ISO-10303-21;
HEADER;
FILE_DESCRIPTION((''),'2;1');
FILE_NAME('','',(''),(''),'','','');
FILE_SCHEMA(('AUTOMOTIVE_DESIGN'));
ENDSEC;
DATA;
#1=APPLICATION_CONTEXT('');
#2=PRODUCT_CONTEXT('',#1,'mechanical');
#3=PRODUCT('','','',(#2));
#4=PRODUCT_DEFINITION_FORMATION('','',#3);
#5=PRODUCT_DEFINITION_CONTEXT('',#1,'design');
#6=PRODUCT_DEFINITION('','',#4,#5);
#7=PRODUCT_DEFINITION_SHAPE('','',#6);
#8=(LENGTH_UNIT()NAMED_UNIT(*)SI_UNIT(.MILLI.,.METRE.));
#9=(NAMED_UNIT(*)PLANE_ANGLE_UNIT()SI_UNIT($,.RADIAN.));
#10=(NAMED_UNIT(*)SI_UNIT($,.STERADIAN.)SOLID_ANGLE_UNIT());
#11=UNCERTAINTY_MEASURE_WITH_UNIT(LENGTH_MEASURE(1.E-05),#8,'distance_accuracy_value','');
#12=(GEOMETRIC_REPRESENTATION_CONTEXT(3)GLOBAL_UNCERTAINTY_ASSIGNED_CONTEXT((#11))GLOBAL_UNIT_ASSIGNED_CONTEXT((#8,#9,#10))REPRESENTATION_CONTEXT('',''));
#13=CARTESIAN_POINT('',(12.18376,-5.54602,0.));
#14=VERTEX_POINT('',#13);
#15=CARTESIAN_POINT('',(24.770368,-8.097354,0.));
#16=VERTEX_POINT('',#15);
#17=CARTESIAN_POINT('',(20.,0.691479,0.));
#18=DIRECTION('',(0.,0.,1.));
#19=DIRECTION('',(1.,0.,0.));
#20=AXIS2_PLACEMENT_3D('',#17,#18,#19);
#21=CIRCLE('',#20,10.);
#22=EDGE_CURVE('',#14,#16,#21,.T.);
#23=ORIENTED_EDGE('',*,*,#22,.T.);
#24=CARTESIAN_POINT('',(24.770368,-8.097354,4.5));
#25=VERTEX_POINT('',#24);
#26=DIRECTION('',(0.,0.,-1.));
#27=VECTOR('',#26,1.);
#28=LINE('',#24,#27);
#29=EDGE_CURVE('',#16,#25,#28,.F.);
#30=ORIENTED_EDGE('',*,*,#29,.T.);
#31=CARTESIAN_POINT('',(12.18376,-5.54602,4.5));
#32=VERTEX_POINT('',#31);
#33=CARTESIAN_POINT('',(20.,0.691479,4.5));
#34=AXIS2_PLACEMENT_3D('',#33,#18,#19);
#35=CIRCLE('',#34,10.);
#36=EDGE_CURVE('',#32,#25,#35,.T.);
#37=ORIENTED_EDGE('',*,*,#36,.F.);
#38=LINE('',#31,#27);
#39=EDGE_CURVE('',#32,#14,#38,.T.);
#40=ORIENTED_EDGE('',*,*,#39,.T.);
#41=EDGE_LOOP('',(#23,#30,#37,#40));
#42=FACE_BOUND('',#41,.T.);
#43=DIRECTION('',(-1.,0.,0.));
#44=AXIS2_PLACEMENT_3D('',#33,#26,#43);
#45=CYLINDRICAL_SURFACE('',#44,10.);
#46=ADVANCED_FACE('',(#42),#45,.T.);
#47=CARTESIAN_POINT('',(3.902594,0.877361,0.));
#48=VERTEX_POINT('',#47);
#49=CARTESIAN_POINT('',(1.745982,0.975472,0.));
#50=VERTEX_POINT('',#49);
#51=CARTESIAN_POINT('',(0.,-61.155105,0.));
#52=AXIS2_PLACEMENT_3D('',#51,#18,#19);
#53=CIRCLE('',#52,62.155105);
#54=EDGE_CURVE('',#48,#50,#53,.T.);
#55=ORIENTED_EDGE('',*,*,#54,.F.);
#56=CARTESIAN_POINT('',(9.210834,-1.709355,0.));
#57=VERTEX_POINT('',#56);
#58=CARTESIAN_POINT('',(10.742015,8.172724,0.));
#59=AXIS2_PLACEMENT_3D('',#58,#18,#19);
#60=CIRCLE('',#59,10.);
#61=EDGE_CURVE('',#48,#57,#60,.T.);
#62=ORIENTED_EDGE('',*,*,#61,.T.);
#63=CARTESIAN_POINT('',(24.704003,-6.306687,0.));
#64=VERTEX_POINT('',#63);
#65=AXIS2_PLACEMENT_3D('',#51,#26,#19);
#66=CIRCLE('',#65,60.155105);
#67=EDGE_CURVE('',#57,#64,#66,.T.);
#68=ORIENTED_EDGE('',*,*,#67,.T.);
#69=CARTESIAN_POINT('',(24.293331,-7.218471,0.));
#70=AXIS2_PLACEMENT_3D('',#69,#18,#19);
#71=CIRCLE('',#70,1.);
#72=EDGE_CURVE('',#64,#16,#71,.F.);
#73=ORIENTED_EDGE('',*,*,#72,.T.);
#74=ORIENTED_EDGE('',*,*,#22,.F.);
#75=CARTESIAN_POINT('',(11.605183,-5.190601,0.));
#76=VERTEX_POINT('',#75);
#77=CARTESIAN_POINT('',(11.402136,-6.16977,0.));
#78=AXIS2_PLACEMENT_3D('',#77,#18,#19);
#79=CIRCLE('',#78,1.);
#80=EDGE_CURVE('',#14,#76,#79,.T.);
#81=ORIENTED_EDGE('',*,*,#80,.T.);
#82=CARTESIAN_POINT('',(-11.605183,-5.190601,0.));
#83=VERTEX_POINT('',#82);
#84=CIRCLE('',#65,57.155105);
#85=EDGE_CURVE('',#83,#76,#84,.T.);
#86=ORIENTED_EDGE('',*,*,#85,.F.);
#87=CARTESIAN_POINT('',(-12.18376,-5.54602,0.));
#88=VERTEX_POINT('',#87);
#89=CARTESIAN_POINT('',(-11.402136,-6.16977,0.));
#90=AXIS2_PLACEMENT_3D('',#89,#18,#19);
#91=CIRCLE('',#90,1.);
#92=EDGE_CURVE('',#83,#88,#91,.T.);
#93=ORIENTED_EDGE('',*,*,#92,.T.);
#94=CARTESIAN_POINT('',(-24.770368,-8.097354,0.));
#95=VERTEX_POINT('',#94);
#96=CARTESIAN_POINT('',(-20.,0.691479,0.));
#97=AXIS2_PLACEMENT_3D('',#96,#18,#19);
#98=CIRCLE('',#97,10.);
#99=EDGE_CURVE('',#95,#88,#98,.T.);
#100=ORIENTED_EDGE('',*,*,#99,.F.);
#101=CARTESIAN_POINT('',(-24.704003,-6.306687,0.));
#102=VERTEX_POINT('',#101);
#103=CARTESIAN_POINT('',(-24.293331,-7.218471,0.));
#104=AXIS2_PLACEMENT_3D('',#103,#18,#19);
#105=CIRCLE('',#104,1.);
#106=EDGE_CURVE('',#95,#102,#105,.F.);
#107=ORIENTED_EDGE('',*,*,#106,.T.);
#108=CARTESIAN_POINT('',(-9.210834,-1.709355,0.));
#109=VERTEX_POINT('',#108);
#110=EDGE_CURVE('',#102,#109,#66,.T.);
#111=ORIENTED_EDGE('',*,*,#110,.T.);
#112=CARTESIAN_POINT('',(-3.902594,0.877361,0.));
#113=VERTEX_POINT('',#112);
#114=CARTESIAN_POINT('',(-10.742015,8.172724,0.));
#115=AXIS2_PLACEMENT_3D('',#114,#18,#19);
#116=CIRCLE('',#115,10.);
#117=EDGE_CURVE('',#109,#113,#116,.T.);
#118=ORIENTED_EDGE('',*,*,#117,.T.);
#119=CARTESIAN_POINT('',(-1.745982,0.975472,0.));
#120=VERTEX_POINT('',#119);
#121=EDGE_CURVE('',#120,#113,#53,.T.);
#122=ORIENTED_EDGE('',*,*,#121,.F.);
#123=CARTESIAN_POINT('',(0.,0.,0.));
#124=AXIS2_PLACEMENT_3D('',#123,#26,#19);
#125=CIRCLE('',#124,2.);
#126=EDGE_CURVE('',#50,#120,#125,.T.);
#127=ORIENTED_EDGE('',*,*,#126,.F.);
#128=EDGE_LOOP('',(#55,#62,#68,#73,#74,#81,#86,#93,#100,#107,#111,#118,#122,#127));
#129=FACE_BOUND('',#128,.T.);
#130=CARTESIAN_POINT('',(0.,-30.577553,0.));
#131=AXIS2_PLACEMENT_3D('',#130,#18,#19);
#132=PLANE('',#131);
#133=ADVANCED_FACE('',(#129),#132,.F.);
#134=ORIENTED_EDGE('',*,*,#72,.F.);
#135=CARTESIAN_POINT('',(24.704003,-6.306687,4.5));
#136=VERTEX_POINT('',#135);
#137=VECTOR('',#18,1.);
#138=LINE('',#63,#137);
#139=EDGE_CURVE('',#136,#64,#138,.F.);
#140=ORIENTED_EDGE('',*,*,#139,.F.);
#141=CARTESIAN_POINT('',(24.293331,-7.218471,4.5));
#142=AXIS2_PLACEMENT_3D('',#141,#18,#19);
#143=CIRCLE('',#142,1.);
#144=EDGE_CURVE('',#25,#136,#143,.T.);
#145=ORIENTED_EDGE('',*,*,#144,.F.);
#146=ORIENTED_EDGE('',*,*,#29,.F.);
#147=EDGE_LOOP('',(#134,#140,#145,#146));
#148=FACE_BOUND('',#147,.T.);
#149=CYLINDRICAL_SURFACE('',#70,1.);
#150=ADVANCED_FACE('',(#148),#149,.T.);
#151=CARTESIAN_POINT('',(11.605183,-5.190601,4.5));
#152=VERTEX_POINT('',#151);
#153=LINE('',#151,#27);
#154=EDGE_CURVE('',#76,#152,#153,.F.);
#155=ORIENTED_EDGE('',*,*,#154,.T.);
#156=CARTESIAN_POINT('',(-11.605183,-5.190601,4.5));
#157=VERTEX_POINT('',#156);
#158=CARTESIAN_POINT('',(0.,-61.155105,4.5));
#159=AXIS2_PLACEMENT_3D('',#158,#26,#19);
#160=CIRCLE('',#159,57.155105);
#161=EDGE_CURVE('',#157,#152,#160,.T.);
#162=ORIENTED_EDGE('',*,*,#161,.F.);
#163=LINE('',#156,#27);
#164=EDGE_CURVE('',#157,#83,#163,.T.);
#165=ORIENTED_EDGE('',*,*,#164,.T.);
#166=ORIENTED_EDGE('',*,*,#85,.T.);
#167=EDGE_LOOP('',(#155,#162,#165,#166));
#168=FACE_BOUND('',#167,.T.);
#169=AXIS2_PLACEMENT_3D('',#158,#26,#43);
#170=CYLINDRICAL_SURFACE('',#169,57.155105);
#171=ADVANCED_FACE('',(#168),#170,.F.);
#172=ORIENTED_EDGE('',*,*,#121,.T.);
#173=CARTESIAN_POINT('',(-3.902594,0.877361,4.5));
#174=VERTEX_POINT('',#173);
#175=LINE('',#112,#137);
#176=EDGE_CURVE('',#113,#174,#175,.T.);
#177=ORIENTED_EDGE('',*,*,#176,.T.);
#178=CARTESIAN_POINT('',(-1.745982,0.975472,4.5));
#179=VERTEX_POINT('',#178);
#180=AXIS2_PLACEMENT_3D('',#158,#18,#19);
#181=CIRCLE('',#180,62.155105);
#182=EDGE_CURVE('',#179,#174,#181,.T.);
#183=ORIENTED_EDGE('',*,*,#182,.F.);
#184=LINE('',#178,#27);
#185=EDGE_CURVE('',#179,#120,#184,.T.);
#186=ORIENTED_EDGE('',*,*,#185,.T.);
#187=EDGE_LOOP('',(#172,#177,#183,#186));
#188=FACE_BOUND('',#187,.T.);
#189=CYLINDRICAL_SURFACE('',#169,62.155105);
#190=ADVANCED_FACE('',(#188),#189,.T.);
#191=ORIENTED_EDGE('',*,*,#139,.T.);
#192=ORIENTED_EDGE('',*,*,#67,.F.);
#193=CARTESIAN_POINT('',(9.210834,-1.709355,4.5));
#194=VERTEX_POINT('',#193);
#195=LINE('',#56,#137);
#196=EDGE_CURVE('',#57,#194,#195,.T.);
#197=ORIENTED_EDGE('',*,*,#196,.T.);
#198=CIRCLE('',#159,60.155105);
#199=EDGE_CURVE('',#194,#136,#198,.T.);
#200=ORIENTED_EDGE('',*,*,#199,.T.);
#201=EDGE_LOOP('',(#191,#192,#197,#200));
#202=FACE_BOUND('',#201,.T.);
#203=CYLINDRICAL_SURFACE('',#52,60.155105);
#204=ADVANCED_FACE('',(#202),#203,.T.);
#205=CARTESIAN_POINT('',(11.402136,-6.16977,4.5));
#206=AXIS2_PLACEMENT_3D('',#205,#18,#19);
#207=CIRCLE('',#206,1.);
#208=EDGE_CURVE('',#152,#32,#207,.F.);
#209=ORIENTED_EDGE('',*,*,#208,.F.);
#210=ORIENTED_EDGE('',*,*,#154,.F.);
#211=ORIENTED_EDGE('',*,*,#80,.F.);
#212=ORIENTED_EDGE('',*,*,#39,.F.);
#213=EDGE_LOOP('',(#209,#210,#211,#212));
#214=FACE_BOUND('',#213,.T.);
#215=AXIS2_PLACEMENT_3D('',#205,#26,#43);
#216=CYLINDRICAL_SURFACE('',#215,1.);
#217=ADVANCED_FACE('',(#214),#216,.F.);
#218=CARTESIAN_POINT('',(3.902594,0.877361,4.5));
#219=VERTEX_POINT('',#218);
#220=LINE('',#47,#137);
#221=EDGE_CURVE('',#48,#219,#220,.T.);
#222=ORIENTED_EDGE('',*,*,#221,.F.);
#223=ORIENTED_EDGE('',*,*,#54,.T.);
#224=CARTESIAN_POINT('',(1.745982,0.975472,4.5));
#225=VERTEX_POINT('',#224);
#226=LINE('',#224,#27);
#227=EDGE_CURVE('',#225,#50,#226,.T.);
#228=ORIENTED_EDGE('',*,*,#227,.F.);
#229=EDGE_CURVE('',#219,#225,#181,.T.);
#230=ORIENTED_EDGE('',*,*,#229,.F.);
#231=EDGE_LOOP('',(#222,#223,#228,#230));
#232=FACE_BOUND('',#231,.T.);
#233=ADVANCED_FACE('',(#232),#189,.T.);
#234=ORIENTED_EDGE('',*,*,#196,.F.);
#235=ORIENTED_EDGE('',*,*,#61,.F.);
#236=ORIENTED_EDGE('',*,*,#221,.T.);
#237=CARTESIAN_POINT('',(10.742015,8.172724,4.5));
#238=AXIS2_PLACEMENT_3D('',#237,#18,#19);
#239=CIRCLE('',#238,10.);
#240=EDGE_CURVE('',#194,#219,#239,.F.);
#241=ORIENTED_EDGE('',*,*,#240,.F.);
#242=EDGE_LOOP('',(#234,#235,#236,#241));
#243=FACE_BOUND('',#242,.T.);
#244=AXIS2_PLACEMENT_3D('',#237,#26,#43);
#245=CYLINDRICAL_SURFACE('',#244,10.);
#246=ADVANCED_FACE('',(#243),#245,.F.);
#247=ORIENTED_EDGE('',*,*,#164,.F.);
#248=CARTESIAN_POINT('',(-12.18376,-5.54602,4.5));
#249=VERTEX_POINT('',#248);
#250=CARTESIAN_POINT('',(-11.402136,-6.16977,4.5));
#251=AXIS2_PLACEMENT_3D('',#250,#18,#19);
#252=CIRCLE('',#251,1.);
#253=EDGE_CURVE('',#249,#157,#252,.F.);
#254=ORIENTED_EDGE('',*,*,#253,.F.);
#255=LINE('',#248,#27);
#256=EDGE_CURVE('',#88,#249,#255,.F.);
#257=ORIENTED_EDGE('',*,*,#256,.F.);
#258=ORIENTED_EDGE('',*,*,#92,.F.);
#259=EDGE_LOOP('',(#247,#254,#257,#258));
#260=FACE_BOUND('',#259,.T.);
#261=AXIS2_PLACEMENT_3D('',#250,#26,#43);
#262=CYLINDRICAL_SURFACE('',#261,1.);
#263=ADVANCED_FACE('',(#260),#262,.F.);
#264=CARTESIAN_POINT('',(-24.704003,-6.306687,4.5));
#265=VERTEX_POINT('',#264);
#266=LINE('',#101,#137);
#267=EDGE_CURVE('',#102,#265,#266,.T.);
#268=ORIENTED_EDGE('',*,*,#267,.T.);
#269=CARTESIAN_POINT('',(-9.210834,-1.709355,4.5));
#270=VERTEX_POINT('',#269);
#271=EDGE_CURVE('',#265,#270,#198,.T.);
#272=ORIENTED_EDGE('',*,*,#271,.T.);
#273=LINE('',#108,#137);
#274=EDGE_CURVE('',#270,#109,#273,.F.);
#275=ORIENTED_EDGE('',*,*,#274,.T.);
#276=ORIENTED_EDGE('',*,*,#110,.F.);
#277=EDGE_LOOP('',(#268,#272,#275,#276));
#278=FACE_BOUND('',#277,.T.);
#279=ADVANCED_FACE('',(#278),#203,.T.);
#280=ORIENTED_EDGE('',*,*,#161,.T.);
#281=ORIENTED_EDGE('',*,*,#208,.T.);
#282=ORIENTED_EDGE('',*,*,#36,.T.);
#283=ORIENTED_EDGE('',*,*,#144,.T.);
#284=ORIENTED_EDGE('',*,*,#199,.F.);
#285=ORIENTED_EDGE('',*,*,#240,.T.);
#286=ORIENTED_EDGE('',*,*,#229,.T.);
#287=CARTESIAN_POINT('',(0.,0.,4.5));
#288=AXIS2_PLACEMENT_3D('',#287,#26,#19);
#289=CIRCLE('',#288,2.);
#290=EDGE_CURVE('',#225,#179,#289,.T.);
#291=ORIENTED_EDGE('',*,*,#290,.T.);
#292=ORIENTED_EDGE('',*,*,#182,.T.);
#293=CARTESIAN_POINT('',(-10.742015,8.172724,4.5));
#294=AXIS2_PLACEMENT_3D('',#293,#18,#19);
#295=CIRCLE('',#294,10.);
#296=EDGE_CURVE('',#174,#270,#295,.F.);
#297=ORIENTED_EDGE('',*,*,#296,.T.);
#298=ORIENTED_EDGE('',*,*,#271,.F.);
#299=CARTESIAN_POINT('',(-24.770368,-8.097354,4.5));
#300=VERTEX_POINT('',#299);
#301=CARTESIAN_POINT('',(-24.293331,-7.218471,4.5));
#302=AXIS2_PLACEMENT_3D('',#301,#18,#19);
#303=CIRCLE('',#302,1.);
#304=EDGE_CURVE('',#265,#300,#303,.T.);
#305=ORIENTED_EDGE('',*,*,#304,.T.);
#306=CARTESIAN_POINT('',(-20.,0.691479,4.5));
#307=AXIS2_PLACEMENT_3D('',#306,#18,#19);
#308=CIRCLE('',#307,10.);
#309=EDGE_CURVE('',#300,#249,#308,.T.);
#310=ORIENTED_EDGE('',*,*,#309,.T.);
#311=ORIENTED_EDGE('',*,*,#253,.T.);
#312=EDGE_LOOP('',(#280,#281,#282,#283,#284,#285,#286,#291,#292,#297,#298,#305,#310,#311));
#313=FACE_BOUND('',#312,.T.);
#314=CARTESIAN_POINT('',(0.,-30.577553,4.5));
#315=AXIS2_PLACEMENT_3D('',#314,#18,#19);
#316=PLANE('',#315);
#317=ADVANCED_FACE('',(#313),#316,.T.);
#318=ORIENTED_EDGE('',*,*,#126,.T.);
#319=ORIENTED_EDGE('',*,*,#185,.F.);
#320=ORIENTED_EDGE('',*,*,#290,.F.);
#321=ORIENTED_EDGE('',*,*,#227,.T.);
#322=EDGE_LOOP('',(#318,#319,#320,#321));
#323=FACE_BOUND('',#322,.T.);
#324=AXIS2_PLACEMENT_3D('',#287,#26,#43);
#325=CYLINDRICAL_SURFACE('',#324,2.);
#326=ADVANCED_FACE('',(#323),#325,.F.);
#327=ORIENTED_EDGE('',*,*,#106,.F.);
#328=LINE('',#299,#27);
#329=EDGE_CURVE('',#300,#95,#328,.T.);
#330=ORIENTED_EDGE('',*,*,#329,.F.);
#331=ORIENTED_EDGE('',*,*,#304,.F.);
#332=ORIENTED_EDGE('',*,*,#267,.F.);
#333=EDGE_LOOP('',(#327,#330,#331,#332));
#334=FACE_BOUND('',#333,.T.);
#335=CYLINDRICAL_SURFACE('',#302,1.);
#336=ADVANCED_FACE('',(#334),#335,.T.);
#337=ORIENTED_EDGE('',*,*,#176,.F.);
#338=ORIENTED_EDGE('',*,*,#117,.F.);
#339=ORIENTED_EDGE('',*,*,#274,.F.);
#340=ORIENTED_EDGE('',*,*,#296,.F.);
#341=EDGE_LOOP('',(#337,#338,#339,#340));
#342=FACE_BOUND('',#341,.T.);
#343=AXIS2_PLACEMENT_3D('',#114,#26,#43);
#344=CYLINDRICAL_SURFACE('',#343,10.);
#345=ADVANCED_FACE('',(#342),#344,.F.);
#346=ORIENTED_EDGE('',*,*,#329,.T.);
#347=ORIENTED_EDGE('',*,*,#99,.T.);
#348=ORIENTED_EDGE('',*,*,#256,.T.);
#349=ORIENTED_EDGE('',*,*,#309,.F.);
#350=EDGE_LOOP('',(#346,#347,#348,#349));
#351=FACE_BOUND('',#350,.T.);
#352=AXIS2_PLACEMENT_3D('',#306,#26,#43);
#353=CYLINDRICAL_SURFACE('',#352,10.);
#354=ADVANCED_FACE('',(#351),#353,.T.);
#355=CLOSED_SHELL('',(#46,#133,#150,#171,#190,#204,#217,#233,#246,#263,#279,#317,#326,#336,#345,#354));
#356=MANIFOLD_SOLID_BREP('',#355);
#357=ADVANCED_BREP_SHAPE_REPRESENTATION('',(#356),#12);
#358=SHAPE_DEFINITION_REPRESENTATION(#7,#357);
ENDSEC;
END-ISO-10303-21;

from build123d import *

# Parameters (mm, degrees)
BOSS_EXTRUDE1_DEPTH = 4.5
CUT_EXTRUDE1_DEPTH  = 30.661852099
FILLET1_R           = 10
FILLET2_R           = 1


with BuildPart() as part:
    # Sketch2 → Boss-Extrude1 (new body)
    with BuildSketch(Plane.XY):
        with BuildLine():
            ThreePointArc((-1.74598224, 0.975472203), (0, -2), (1.74598224, 0.975472203))
            ThreePointArc((1.74598224, 0.975472203), (15.131316317, -0.869946427), (27.801563151, -5.564366886))
            ThreePointArc((27.801563151, -5.564366886), (19.812423986, -9.306761236), (11.969278721, -5.267338946))
            ThreePointArc((11.969278721, -5.267338946), (0, -4), (-11.969278721, -5.267338946))
            ThreePointArc((-11.969278721, -5.267338946), (-19.812423986, -9.306761236), (-27.801563151, -5.564366886))
            ThreePointArc((-27.801563151, -5.564366886), (-15.131316317, -0.869946427), (-1.74598224, 0.975472203))
        make_face()
    extrude(amount=BOSS_EXTRUDE1_DEPTH)

    # Sketch3 → Cut-Extrude1 (cut, through all)
    with BuildSketch(Plane.XY.offset(4.5)):
        with BuildLine():
            ThreePointArc((-3.839229312, -1.122638985), (-15.367183828, -2.995958524), (-26.315878496, -7.061563826))
            ThreePointArc((-26.315878496, -7.061563826), (-27.098305385, -6.352245543), (-27.801563151, -5.564366886))
            ThreePointArc((-27.801563151, -5.564366886), (-16.175980809, -1.141817117), (-3.902593708, 0.877361015))
            ThreePointArc((-3.902593708, 0.877361015), (-3.997993987, -0.126665237), (-3.839229312, -1.122638985))
        make_face()
        with BuildLine():
            ThreePointArc((26.315878496, -7.061563826), (15.367183828, -2.995958524), (3.839229312, -1.122638985))
            ThreePointArc((3.839229312, -1.122638985), (3.997993987, -0.126665237), (3.902593708, 0.877361015))
            ThreePointArc((3.902593708, 0.877361015), (16.175980809, -1.141817117), (27.801563151, -5.564366886))
            ThreePointArc((27.801563151, -5.564366886), (27.098305385, -6.352245543), (26.315878496, -7.061563826))
        make_face()
    extrude(amount=-CUT_EXTRUDE1_DEPTH, mode=Mode.SUBTRACT)

    # Fillet1
    # the kernel refuses this fillet: 10 mm, written as the material it adds along each edge
    with BuildSketch(Plane(origin=(-3.839229312, -1.122638985, 4.5), x_dir=(-0.9940877478699028, -0.10857969209269472, 0), z_dir=(0, 0, -1))) as fillet1_piece_1:
        with BuildLine():
            CenterArc((5.852686638, 9.989908799), FILLET1_R, 233.080982265, 34.344798216)
            Line((-0.154169614, 1.995055582), (-0.27430674, 1.835158518))
            ThreePointArc((-0.27430674, 1.835158518), (-0.14972201, 0.99191469), (-0.196921331, 0.034956966))
            Line((-0.196921331, 0.034956966), (0.008982698, -0.199798176))
            ThreePointArc((0.008982698, -0.199798176), (2.701775857, -0.139296277), (5.394569015, -0.199798176))
            Line((5.394569015, -0.199798176), (5.403551713, 0))
        make_face()
    extrude(amount=4.5)
    with BuildSketch(Plane(origin=(3.839229312, -1.122638985, 4.5), x_dir=(0.9940877478699031, -0.10857969209269294, 0), z_dir=(0, 0, -1))) as fillet1_piece_2:
        with BuildLine():
            CenterArc((5.852686638, -9.989908799), FILLET1_R, 92.574219519, 34.344798216)
            Line((-0.154169614, -1.995055582), (-0.27430674, -1.835158518))
            ThreePointArc((-0.27430674, -1.835158518), (-0.14972201, -0.99191469), (-0.196921331, -0.034956966))
            Line((-0.196921331, -0.034956966), (0.008982698, 0.199798176))
            ThreePointArc((0.008982698, 0.199798176), (2.701775857, 0.139296277), (5.394569015, 0.199798176))
            Line((5.394569015, 0.199798176), (5.403551713, 0))
        make_face()
    extrude(amount=4.5)

    # Fillet2
    fillet2_edges = [part.edges().sort_by_distance(p)[0] for p in [
        (11.969278721, -5.267338946, 2.25),
        (-11.969278721, -5.267338946, 2.25),
        (26.315878496, -7.061563826, 2.25),
        (-26.315878496, -7.061563826, 2.25),
    ]]
    fillet(fillet2_edges, radius=FILLET2_R)


solid = part.part
